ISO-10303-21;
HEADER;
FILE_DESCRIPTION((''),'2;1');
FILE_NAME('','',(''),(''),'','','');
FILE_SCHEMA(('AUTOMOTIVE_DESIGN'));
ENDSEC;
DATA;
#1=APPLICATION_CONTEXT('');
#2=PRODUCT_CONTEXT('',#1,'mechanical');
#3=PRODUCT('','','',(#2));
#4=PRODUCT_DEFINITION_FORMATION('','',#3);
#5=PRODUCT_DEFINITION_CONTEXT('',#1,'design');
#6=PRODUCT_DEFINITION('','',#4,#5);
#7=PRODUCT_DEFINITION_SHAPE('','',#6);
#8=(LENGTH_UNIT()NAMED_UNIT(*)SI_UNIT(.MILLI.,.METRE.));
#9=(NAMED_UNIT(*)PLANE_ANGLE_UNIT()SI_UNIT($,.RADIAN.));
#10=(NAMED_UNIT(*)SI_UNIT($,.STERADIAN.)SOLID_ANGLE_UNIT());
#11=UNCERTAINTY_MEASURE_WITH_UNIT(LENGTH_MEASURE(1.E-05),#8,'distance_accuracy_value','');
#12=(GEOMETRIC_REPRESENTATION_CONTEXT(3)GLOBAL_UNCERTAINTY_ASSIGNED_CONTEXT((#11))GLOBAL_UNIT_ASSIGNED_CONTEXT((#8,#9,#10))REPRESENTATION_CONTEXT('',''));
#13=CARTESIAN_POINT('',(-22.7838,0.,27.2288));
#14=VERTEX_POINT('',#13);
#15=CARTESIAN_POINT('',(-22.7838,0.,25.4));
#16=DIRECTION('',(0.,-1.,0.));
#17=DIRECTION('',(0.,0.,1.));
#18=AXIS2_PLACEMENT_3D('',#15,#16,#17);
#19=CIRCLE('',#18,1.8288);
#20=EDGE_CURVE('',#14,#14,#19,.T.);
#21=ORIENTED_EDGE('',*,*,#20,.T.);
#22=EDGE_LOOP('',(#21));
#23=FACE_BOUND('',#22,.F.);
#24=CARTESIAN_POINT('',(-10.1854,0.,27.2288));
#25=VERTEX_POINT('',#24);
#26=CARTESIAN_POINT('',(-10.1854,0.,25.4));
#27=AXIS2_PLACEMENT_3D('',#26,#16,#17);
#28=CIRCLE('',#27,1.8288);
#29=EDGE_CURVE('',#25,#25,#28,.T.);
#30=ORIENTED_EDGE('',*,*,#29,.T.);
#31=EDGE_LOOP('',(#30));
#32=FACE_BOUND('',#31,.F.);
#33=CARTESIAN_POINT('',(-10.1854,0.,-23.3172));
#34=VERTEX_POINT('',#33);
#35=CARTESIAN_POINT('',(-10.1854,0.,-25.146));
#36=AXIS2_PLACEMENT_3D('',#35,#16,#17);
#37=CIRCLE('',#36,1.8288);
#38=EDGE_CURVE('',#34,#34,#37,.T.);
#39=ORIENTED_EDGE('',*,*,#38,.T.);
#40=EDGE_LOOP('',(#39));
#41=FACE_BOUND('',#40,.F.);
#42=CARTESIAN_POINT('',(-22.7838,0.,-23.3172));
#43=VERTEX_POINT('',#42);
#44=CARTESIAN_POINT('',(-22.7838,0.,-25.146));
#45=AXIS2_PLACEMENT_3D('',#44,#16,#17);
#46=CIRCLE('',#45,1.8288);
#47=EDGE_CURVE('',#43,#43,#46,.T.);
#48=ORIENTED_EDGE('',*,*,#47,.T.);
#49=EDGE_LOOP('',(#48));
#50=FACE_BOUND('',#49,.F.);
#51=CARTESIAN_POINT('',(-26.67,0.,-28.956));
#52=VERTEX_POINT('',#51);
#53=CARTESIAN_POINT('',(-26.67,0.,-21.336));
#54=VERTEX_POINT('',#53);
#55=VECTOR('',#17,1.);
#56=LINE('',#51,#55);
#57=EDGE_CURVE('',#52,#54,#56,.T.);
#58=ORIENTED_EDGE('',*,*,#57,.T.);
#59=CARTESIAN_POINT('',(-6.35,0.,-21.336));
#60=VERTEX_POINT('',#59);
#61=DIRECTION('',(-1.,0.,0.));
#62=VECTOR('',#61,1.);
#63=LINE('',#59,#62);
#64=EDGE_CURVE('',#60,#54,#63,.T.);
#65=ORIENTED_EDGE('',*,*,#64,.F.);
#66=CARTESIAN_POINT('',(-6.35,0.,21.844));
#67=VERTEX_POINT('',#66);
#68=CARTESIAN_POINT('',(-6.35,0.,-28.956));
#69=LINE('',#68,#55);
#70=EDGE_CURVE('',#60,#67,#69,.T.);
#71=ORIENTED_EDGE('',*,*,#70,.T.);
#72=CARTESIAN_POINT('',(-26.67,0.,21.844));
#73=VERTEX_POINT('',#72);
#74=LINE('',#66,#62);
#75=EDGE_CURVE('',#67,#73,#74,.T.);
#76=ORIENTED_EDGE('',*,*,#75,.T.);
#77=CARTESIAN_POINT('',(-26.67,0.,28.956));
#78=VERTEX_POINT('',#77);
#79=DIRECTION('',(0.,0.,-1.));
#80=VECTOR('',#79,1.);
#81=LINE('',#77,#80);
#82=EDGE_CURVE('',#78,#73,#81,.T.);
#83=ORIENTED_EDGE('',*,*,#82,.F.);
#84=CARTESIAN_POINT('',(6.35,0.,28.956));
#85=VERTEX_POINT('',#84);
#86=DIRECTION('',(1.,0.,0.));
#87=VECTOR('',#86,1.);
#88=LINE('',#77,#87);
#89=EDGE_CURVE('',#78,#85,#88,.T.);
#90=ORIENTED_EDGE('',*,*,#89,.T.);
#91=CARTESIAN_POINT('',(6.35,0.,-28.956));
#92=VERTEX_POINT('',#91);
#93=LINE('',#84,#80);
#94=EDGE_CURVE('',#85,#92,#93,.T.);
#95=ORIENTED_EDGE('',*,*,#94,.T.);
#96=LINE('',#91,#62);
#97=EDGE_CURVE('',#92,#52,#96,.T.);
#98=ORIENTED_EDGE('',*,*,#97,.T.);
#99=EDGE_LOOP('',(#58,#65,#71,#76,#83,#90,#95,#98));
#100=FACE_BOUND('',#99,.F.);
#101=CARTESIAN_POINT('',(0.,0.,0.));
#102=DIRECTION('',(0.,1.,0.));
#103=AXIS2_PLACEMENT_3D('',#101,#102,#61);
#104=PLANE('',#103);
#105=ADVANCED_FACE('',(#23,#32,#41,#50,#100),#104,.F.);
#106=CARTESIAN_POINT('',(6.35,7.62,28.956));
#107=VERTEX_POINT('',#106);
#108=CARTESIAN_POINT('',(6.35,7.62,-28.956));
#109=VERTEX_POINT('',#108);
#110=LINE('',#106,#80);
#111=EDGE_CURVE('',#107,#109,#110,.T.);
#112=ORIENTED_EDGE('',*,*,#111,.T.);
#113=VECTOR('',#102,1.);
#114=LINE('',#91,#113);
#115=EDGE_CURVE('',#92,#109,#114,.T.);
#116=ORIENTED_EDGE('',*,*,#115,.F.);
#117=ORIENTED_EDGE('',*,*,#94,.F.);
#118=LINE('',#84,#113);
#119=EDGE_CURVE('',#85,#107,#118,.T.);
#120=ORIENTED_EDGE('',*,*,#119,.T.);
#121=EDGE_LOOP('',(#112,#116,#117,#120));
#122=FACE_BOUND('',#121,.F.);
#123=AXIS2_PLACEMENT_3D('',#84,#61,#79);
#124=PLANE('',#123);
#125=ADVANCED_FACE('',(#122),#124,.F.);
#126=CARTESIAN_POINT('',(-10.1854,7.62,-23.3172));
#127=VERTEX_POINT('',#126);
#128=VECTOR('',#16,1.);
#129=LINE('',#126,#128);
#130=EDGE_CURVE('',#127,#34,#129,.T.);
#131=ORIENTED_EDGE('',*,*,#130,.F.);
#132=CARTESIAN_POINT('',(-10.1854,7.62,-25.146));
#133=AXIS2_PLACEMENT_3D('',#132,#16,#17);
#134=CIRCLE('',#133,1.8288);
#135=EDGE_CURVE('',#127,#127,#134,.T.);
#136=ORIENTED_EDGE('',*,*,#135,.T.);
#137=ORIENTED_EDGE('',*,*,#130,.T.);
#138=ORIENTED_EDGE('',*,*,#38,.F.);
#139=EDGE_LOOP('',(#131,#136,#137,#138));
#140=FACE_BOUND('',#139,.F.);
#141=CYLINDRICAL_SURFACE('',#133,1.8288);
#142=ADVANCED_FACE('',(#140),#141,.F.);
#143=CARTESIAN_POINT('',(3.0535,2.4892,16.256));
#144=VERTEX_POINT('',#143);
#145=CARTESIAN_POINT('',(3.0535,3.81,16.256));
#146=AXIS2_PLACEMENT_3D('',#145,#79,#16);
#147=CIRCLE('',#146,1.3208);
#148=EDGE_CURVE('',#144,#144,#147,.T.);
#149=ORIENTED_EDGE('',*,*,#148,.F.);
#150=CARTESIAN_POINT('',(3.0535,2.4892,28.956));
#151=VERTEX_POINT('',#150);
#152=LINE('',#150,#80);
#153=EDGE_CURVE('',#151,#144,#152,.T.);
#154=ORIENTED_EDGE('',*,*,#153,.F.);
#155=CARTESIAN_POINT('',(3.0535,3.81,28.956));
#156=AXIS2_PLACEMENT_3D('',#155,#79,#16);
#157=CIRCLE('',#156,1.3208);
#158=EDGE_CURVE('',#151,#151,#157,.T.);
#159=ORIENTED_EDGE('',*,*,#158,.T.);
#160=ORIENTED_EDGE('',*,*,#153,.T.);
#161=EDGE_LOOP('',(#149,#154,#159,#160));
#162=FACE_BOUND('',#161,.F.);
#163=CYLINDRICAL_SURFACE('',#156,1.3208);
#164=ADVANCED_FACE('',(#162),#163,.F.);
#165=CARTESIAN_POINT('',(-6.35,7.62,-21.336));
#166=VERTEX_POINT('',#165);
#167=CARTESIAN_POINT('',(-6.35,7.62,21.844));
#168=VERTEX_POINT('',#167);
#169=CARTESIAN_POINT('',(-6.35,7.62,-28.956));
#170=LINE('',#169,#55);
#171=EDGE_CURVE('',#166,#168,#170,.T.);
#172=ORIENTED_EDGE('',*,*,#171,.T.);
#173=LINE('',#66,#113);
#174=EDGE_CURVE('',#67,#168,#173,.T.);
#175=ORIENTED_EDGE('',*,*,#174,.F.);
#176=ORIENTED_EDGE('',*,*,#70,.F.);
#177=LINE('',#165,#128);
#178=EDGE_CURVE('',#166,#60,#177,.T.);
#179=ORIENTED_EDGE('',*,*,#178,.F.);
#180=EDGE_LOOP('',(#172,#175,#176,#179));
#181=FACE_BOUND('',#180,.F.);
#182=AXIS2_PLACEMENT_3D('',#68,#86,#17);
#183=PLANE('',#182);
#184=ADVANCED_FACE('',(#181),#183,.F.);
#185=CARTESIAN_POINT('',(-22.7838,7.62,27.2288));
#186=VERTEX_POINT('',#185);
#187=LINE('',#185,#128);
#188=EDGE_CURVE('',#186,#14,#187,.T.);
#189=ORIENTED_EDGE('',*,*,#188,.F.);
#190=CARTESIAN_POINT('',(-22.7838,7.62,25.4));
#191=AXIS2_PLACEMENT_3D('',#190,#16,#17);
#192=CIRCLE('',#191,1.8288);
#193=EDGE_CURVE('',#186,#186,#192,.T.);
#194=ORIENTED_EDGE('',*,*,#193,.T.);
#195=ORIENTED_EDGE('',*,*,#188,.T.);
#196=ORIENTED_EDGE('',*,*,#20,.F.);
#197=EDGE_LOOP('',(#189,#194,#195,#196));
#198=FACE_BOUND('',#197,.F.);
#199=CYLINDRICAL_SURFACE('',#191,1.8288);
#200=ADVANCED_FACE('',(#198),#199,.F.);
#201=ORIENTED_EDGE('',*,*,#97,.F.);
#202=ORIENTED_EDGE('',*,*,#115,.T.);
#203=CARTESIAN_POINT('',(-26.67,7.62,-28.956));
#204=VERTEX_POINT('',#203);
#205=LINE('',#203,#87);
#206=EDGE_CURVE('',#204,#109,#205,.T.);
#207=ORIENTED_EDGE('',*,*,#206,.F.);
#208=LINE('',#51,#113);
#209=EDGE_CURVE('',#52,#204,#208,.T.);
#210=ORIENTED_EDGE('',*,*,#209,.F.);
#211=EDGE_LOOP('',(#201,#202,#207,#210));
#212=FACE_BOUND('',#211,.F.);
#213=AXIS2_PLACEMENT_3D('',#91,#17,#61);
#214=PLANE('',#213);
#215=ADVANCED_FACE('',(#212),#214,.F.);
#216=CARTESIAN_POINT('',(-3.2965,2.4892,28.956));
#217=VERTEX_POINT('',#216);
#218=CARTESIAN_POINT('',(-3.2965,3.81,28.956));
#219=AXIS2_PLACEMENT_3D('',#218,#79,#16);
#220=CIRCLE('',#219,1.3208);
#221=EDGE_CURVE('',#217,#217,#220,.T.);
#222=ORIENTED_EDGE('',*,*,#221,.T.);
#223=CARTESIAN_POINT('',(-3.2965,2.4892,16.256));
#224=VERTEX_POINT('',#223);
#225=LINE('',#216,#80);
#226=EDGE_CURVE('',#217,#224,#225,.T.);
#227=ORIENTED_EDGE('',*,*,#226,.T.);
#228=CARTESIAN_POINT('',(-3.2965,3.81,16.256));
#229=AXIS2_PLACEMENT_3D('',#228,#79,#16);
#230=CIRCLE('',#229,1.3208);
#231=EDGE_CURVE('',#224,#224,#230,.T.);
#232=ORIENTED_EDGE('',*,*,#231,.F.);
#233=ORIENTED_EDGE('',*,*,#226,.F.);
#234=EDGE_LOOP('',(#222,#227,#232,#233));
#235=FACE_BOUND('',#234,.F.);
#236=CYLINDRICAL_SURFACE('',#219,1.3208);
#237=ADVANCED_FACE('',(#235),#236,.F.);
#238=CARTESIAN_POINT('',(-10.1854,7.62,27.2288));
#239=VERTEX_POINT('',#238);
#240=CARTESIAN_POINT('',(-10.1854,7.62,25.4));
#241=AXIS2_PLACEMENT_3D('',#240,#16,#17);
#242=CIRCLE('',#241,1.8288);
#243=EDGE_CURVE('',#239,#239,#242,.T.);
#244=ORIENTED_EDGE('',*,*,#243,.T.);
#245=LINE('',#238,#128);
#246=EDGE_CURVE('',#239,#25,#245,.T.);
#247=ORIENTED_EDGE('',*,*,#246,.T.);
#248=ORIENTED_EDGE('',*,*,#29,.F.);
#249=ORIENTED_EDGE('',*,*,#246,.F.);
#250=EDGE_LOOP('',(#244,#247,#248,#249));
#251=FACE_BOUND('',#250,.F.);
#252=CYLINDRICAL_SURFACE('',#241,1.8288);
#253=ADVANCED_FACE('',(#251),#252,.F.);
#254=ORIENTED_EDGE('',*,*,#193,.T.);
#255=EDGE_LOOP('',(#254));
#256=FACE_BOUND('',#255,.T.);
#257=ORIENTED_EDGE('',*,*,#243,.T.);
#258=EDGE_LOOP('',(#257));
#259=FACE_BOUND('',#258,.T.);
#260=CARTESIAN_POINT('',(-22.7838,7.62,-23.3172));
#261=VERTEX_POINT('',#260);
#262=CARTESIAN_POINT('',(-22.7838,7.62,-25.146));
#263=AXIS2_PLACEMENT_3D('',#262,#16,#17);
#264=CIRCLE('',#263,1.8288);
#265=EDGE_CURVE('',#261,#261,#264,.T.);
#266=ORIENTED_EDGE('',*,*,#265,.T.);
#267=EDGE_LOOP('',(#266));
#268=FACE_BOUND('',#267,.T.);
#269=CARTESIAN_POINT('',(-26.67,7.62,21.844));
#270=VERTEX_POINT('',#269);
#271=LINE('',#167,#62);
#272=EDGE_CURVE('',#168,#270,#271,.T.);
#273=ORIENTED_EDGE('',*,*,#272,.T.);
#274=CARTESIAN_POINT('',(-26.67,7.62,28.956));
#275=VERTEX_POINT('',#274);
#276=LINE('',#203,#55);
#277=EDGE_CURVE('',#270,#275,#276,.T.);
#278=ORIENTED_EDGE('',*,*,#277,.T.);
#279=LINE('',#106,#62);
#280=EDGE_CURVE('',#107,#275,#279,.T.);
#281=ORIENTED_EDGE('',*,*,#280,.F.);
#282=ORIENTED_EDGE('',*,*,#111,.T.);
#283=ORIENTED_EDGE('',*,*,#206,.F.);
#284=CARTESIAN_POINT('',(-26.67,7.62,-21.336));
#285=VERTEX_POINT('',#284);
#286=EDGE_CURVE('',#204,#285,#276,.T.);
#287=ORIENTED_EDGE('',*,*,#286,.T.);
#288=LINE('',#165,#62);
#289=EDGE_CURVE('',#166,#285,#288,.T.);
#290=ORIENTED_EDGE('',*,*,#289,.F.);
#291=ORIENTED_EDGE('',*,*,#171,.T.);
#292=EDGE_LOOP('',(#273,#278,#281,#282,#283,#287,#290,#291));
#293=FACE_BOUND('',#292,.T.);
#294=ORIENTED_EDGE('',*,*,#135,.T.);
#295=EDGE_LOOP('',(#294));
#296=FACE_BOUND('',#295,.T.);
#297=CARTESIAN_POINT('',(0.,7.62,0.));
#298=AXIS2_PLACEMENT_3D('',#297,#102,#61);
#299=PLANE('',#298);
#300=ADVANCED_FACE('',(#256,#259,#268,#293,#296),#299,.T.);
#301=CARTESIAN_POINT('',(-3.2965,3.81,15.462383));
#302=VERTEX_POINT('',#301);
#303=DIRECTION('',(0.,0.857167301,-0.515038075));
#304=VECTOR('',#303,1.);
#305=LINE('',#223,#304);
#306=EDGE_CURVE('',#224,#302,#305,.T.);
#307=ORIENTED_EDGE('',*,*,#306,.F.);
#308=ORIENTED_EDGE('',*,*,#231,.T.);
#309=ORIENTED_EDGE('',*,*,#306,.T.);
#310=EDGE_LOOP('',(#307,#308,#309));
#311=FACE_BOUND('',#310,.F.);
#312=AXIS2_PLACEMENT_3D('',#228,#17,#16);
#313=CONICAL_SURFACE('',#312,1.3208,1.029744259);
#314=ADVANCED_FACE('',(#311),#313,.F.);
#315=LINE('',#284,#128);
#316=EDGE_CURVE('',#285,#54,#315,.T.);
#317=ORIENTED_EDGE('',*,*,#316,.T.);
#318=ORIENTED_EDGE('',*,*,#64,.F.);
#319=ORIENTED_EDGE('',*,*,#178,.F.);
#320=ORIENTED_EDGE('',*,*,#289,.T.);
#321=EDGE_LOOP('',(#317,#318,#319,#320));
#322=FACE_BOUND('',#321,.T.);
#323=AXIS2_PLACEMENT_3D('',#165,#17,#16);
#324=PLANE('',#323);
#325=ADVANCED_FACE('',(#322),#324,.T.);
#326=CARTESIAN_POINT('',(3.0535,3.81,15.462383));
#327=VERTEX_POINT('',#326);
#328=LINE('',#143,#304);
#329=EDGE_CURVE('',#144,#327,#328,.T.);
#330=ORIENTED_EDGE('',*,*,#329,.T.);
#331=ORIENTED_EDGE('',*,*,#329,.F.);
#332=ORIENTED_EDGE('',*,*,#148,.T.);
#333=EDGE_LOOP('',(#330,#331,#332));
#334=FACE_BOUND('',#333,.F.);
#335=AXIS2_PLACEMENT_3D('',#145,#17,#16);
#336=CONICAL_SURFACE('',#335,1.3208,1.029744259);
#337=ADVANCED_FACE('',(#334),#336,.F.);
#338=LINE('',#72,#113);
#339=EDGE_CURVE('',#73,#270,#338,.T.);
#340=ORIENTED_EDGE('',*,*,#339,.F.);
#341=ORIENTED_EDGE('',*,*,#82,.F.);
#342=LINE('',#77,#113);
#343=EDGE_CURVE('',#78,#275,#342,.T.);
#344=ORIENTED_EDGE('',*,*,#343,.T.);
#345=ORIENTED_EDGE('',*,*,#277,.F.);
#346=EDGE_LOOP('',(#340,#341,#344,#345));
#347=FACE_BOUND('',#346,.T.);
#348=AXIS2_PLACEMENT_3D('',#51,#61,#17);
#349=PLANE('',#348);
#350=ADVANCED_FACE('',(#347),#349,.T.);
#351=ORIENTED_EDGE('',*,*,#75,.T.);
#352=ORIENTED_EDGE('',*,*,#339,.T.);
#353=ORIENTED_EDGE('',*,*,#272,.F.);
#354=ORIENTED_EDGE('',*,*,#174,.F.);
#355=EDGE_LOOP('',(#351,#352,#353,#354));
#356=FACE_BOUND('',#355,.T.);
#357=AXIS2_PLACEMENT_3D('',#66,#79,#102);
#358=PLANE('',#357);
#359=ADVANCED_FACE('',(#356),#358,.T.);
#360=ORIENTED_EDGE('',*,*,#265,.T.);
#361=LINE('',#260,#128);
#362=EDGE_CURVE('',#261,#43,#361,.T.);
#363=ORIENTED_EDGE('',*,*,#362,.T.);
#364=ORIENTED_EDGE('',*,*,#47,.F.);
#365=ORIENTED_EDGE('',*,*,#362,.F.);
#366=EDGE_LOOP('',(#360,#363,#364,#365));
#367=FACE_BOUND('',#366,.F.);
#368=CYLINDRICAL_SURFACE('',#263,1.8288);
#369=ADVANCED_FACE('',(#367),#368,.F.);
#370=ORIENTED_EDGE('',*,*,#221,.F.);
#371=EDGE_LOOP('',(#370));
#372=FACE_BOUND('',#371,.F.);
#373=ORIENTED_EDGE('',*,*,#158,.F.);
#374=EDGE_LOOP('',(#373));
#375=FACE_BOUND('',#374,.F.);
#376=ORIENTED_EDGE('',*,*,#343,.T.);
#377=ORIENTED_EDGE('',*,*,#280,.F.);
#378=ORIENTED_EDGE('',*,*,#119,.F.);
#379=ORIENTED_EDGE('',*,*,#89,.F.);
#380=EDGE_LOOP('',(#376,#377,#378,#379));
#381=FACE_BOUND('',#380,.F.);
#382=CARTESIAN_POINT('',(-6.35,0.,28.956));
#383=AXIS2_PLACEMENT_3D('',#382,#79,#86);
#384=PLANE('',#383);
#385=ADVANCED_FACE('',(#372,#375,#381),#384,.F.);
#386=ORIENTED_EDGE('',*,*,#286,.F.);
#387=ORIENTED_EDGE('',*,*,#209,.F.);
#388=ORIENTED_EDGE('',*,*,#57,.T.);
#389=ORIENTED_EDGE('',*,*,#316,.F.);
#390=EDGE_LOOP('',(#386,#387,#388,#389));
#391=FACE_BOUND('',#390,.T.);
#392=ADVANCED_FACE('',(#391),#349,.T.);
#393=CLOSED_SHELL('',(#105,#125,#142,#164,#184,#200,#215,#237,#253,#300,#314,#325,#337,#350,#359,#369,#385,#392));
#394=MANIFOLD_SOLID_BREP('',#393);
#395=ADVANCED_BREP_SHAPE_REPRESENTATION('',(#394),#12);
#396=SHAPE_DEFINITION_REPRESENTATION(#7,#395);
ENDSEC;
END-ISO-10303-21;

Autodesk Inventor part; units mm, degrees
ref_plane "YZ Plane" through (0, 0, 0) normal (1, 0, 0) x (0, 1, 0)
ref_plane "XZ Plane" through (0, 0, 0) normal (0, 1, 0) x (-1, 0, 0)
ref_plane "XY Plane" through (0, 0, 0) normal (0, 0, 1) x (1, 0, 0)
sketch "Sketch4" plane through (0, 0, 0) normal (0, 1, 0) x (-1, 0, 0)
  line L0 (-6.35, -28.956) -> (6.35, -28.956)
  line L1 (6.35, -28.956) -> (6.35, 28.956)
  line L2 (6.35, 28.956) -> (-6.35, 28.956)
  line L3 (-6.35, 28.956) -> (-6.35, -28.956)
  line L4 (-6.35, -28.956) -> (6.35, 28.956) construction
  line L5 (6.35, -28.956) -> (-6.35, 28.956) construction
  point P0 (0, 0)
  dimension "d14" = 12.7
  dimension "d15" = 57.912
extrude "Extrusion3" add sketch "Sketch4" along normal blind 7.62
sketch "Sketch5" plane through (-6.35, 0, -28.956) normal (-1, 0, 0) x (0, 0, 1)
  line L0 (0, 0) -> (57.912, 0) projected
  line L1 (57.912, 0) -> (57.912, 7.62) projected
  line L2 (0, 7.62) -> (57.912, 7.62) projected
  line L3 (0, 7.62) -> (7.62, 7.62)
  line L4 (7.62, 7.62) -> (7.62, 0)
  line L5 (7.62, 0) -> (0, 0)
  line L6 (0, 0) -> (0, 7.62)
  line L7 (57.15, 0) -> (50.8, 0)
  line L8 (50.8, 0) -> (50.8, 7.62)
  line L9 (50.8, 7.62) -> (57.912, 7.62)
  line L10 (57.912, 0) -> (57.15, 0)
  point P0 (28.956, 0)
  dimension "d18" = 7.62
  dimension "d21" = 50.8
extrude "Extrusion4" add sketch "Sketch5" along normal blind 20.32 contours L6 L2 L4 L0 | L8 L2 L1 L0
sketch "Sketch6" plane through (0, 7.62, 0) normal (0, 1, 0) x (1, 0, 0)
  line L0 (6.35, -28.956) -> (-26.67, -28.956) projected
  line L1 (6.35, -28.956) -> (6.35, 28.956) projected
  line L2 (-22.7838, 26.9211) -> (-22.7838, -27.5281) construction
  line L3 (-10.1854, 26.9211) -> (-10.1854, -27.5281) construction
  line L4 (-7.0821, 25.146) -> (-30.0582, 25.146) construction
  line L5 (-5.6948, -25.4) -> (-30.0582, -25.4) construction
  point P0 (-26.67, 28.956)
  point P1 (-26.67, 21.336)
  point P2 (-26.67, -21.844)
  point P3 (0, 0)
  point P4 (-22.7838, 25.146)
  point P5 (-10.1854, 25.146)
  point P6 (-10.1854, -25.4)
  point P7 (-22.7838, -25.4)
  dimension "d26" = 3.556
  dimension "d27" = 3.81
  dimension "d28" = 3.8862
  dimension "d29" = 12.5984
  dimension "d30" = 16.4846
hole "Hole1" at (-22.7838, 7.62, -25.146) at (-10.1854, 7.62, -25.146) at (-10.1854, 7.62, 25.4) at (-22.7838, 7.62, 25.4) direction (0, -1, 0) diameter 3.6576 end up to surface clearance for "Flat Head Machine Screw (82)" size "#6" standard "Ansi Unified Screw Threads"
sketch "Sketch7" plane through (6.35, 0, 28.956) normal (0, 0, 1) x (1, 0, 0)
  line L0 (0, 0) -> (-33.02, 0) projected
  line L1 (0, 0) -> (0, 7.62) projected
  line L2 (0, 7.62) -> (-33.02, 7.62) projected
  line L3 (-12.7, 0) -> (-12.7, 7.62) projected
  line L4 (-12.7, 7.62) -> (-12.7, 0) projected
  line L5 (-6.5931, 0) -> (-6.5931, 7.62) construction
  line L6 (-12.7, 3.81) -> (-6.5931, 3.81) construction
  line L7 (0, 3.81) -> (-6.5931, 3.81) construction
  point P0 (-6.35, 0)
  point P1 (-9.6465, 3.81)
  point P2 (-3.2965, 3.81)
  dimension "d38" = 6.5931
hole "Hole2" at (-3.2965, 3.81, 28.956) at (3.0535, 3.81, 28.956) direction (0, 0, -1) diameter 2.6416 depth 12.7 tip angle 118 thread size "6-32 UNC" class "2B" standard "ANSI Unified Screw Threads"
properties part number "servo_mount" material "Aluminum 6061"
